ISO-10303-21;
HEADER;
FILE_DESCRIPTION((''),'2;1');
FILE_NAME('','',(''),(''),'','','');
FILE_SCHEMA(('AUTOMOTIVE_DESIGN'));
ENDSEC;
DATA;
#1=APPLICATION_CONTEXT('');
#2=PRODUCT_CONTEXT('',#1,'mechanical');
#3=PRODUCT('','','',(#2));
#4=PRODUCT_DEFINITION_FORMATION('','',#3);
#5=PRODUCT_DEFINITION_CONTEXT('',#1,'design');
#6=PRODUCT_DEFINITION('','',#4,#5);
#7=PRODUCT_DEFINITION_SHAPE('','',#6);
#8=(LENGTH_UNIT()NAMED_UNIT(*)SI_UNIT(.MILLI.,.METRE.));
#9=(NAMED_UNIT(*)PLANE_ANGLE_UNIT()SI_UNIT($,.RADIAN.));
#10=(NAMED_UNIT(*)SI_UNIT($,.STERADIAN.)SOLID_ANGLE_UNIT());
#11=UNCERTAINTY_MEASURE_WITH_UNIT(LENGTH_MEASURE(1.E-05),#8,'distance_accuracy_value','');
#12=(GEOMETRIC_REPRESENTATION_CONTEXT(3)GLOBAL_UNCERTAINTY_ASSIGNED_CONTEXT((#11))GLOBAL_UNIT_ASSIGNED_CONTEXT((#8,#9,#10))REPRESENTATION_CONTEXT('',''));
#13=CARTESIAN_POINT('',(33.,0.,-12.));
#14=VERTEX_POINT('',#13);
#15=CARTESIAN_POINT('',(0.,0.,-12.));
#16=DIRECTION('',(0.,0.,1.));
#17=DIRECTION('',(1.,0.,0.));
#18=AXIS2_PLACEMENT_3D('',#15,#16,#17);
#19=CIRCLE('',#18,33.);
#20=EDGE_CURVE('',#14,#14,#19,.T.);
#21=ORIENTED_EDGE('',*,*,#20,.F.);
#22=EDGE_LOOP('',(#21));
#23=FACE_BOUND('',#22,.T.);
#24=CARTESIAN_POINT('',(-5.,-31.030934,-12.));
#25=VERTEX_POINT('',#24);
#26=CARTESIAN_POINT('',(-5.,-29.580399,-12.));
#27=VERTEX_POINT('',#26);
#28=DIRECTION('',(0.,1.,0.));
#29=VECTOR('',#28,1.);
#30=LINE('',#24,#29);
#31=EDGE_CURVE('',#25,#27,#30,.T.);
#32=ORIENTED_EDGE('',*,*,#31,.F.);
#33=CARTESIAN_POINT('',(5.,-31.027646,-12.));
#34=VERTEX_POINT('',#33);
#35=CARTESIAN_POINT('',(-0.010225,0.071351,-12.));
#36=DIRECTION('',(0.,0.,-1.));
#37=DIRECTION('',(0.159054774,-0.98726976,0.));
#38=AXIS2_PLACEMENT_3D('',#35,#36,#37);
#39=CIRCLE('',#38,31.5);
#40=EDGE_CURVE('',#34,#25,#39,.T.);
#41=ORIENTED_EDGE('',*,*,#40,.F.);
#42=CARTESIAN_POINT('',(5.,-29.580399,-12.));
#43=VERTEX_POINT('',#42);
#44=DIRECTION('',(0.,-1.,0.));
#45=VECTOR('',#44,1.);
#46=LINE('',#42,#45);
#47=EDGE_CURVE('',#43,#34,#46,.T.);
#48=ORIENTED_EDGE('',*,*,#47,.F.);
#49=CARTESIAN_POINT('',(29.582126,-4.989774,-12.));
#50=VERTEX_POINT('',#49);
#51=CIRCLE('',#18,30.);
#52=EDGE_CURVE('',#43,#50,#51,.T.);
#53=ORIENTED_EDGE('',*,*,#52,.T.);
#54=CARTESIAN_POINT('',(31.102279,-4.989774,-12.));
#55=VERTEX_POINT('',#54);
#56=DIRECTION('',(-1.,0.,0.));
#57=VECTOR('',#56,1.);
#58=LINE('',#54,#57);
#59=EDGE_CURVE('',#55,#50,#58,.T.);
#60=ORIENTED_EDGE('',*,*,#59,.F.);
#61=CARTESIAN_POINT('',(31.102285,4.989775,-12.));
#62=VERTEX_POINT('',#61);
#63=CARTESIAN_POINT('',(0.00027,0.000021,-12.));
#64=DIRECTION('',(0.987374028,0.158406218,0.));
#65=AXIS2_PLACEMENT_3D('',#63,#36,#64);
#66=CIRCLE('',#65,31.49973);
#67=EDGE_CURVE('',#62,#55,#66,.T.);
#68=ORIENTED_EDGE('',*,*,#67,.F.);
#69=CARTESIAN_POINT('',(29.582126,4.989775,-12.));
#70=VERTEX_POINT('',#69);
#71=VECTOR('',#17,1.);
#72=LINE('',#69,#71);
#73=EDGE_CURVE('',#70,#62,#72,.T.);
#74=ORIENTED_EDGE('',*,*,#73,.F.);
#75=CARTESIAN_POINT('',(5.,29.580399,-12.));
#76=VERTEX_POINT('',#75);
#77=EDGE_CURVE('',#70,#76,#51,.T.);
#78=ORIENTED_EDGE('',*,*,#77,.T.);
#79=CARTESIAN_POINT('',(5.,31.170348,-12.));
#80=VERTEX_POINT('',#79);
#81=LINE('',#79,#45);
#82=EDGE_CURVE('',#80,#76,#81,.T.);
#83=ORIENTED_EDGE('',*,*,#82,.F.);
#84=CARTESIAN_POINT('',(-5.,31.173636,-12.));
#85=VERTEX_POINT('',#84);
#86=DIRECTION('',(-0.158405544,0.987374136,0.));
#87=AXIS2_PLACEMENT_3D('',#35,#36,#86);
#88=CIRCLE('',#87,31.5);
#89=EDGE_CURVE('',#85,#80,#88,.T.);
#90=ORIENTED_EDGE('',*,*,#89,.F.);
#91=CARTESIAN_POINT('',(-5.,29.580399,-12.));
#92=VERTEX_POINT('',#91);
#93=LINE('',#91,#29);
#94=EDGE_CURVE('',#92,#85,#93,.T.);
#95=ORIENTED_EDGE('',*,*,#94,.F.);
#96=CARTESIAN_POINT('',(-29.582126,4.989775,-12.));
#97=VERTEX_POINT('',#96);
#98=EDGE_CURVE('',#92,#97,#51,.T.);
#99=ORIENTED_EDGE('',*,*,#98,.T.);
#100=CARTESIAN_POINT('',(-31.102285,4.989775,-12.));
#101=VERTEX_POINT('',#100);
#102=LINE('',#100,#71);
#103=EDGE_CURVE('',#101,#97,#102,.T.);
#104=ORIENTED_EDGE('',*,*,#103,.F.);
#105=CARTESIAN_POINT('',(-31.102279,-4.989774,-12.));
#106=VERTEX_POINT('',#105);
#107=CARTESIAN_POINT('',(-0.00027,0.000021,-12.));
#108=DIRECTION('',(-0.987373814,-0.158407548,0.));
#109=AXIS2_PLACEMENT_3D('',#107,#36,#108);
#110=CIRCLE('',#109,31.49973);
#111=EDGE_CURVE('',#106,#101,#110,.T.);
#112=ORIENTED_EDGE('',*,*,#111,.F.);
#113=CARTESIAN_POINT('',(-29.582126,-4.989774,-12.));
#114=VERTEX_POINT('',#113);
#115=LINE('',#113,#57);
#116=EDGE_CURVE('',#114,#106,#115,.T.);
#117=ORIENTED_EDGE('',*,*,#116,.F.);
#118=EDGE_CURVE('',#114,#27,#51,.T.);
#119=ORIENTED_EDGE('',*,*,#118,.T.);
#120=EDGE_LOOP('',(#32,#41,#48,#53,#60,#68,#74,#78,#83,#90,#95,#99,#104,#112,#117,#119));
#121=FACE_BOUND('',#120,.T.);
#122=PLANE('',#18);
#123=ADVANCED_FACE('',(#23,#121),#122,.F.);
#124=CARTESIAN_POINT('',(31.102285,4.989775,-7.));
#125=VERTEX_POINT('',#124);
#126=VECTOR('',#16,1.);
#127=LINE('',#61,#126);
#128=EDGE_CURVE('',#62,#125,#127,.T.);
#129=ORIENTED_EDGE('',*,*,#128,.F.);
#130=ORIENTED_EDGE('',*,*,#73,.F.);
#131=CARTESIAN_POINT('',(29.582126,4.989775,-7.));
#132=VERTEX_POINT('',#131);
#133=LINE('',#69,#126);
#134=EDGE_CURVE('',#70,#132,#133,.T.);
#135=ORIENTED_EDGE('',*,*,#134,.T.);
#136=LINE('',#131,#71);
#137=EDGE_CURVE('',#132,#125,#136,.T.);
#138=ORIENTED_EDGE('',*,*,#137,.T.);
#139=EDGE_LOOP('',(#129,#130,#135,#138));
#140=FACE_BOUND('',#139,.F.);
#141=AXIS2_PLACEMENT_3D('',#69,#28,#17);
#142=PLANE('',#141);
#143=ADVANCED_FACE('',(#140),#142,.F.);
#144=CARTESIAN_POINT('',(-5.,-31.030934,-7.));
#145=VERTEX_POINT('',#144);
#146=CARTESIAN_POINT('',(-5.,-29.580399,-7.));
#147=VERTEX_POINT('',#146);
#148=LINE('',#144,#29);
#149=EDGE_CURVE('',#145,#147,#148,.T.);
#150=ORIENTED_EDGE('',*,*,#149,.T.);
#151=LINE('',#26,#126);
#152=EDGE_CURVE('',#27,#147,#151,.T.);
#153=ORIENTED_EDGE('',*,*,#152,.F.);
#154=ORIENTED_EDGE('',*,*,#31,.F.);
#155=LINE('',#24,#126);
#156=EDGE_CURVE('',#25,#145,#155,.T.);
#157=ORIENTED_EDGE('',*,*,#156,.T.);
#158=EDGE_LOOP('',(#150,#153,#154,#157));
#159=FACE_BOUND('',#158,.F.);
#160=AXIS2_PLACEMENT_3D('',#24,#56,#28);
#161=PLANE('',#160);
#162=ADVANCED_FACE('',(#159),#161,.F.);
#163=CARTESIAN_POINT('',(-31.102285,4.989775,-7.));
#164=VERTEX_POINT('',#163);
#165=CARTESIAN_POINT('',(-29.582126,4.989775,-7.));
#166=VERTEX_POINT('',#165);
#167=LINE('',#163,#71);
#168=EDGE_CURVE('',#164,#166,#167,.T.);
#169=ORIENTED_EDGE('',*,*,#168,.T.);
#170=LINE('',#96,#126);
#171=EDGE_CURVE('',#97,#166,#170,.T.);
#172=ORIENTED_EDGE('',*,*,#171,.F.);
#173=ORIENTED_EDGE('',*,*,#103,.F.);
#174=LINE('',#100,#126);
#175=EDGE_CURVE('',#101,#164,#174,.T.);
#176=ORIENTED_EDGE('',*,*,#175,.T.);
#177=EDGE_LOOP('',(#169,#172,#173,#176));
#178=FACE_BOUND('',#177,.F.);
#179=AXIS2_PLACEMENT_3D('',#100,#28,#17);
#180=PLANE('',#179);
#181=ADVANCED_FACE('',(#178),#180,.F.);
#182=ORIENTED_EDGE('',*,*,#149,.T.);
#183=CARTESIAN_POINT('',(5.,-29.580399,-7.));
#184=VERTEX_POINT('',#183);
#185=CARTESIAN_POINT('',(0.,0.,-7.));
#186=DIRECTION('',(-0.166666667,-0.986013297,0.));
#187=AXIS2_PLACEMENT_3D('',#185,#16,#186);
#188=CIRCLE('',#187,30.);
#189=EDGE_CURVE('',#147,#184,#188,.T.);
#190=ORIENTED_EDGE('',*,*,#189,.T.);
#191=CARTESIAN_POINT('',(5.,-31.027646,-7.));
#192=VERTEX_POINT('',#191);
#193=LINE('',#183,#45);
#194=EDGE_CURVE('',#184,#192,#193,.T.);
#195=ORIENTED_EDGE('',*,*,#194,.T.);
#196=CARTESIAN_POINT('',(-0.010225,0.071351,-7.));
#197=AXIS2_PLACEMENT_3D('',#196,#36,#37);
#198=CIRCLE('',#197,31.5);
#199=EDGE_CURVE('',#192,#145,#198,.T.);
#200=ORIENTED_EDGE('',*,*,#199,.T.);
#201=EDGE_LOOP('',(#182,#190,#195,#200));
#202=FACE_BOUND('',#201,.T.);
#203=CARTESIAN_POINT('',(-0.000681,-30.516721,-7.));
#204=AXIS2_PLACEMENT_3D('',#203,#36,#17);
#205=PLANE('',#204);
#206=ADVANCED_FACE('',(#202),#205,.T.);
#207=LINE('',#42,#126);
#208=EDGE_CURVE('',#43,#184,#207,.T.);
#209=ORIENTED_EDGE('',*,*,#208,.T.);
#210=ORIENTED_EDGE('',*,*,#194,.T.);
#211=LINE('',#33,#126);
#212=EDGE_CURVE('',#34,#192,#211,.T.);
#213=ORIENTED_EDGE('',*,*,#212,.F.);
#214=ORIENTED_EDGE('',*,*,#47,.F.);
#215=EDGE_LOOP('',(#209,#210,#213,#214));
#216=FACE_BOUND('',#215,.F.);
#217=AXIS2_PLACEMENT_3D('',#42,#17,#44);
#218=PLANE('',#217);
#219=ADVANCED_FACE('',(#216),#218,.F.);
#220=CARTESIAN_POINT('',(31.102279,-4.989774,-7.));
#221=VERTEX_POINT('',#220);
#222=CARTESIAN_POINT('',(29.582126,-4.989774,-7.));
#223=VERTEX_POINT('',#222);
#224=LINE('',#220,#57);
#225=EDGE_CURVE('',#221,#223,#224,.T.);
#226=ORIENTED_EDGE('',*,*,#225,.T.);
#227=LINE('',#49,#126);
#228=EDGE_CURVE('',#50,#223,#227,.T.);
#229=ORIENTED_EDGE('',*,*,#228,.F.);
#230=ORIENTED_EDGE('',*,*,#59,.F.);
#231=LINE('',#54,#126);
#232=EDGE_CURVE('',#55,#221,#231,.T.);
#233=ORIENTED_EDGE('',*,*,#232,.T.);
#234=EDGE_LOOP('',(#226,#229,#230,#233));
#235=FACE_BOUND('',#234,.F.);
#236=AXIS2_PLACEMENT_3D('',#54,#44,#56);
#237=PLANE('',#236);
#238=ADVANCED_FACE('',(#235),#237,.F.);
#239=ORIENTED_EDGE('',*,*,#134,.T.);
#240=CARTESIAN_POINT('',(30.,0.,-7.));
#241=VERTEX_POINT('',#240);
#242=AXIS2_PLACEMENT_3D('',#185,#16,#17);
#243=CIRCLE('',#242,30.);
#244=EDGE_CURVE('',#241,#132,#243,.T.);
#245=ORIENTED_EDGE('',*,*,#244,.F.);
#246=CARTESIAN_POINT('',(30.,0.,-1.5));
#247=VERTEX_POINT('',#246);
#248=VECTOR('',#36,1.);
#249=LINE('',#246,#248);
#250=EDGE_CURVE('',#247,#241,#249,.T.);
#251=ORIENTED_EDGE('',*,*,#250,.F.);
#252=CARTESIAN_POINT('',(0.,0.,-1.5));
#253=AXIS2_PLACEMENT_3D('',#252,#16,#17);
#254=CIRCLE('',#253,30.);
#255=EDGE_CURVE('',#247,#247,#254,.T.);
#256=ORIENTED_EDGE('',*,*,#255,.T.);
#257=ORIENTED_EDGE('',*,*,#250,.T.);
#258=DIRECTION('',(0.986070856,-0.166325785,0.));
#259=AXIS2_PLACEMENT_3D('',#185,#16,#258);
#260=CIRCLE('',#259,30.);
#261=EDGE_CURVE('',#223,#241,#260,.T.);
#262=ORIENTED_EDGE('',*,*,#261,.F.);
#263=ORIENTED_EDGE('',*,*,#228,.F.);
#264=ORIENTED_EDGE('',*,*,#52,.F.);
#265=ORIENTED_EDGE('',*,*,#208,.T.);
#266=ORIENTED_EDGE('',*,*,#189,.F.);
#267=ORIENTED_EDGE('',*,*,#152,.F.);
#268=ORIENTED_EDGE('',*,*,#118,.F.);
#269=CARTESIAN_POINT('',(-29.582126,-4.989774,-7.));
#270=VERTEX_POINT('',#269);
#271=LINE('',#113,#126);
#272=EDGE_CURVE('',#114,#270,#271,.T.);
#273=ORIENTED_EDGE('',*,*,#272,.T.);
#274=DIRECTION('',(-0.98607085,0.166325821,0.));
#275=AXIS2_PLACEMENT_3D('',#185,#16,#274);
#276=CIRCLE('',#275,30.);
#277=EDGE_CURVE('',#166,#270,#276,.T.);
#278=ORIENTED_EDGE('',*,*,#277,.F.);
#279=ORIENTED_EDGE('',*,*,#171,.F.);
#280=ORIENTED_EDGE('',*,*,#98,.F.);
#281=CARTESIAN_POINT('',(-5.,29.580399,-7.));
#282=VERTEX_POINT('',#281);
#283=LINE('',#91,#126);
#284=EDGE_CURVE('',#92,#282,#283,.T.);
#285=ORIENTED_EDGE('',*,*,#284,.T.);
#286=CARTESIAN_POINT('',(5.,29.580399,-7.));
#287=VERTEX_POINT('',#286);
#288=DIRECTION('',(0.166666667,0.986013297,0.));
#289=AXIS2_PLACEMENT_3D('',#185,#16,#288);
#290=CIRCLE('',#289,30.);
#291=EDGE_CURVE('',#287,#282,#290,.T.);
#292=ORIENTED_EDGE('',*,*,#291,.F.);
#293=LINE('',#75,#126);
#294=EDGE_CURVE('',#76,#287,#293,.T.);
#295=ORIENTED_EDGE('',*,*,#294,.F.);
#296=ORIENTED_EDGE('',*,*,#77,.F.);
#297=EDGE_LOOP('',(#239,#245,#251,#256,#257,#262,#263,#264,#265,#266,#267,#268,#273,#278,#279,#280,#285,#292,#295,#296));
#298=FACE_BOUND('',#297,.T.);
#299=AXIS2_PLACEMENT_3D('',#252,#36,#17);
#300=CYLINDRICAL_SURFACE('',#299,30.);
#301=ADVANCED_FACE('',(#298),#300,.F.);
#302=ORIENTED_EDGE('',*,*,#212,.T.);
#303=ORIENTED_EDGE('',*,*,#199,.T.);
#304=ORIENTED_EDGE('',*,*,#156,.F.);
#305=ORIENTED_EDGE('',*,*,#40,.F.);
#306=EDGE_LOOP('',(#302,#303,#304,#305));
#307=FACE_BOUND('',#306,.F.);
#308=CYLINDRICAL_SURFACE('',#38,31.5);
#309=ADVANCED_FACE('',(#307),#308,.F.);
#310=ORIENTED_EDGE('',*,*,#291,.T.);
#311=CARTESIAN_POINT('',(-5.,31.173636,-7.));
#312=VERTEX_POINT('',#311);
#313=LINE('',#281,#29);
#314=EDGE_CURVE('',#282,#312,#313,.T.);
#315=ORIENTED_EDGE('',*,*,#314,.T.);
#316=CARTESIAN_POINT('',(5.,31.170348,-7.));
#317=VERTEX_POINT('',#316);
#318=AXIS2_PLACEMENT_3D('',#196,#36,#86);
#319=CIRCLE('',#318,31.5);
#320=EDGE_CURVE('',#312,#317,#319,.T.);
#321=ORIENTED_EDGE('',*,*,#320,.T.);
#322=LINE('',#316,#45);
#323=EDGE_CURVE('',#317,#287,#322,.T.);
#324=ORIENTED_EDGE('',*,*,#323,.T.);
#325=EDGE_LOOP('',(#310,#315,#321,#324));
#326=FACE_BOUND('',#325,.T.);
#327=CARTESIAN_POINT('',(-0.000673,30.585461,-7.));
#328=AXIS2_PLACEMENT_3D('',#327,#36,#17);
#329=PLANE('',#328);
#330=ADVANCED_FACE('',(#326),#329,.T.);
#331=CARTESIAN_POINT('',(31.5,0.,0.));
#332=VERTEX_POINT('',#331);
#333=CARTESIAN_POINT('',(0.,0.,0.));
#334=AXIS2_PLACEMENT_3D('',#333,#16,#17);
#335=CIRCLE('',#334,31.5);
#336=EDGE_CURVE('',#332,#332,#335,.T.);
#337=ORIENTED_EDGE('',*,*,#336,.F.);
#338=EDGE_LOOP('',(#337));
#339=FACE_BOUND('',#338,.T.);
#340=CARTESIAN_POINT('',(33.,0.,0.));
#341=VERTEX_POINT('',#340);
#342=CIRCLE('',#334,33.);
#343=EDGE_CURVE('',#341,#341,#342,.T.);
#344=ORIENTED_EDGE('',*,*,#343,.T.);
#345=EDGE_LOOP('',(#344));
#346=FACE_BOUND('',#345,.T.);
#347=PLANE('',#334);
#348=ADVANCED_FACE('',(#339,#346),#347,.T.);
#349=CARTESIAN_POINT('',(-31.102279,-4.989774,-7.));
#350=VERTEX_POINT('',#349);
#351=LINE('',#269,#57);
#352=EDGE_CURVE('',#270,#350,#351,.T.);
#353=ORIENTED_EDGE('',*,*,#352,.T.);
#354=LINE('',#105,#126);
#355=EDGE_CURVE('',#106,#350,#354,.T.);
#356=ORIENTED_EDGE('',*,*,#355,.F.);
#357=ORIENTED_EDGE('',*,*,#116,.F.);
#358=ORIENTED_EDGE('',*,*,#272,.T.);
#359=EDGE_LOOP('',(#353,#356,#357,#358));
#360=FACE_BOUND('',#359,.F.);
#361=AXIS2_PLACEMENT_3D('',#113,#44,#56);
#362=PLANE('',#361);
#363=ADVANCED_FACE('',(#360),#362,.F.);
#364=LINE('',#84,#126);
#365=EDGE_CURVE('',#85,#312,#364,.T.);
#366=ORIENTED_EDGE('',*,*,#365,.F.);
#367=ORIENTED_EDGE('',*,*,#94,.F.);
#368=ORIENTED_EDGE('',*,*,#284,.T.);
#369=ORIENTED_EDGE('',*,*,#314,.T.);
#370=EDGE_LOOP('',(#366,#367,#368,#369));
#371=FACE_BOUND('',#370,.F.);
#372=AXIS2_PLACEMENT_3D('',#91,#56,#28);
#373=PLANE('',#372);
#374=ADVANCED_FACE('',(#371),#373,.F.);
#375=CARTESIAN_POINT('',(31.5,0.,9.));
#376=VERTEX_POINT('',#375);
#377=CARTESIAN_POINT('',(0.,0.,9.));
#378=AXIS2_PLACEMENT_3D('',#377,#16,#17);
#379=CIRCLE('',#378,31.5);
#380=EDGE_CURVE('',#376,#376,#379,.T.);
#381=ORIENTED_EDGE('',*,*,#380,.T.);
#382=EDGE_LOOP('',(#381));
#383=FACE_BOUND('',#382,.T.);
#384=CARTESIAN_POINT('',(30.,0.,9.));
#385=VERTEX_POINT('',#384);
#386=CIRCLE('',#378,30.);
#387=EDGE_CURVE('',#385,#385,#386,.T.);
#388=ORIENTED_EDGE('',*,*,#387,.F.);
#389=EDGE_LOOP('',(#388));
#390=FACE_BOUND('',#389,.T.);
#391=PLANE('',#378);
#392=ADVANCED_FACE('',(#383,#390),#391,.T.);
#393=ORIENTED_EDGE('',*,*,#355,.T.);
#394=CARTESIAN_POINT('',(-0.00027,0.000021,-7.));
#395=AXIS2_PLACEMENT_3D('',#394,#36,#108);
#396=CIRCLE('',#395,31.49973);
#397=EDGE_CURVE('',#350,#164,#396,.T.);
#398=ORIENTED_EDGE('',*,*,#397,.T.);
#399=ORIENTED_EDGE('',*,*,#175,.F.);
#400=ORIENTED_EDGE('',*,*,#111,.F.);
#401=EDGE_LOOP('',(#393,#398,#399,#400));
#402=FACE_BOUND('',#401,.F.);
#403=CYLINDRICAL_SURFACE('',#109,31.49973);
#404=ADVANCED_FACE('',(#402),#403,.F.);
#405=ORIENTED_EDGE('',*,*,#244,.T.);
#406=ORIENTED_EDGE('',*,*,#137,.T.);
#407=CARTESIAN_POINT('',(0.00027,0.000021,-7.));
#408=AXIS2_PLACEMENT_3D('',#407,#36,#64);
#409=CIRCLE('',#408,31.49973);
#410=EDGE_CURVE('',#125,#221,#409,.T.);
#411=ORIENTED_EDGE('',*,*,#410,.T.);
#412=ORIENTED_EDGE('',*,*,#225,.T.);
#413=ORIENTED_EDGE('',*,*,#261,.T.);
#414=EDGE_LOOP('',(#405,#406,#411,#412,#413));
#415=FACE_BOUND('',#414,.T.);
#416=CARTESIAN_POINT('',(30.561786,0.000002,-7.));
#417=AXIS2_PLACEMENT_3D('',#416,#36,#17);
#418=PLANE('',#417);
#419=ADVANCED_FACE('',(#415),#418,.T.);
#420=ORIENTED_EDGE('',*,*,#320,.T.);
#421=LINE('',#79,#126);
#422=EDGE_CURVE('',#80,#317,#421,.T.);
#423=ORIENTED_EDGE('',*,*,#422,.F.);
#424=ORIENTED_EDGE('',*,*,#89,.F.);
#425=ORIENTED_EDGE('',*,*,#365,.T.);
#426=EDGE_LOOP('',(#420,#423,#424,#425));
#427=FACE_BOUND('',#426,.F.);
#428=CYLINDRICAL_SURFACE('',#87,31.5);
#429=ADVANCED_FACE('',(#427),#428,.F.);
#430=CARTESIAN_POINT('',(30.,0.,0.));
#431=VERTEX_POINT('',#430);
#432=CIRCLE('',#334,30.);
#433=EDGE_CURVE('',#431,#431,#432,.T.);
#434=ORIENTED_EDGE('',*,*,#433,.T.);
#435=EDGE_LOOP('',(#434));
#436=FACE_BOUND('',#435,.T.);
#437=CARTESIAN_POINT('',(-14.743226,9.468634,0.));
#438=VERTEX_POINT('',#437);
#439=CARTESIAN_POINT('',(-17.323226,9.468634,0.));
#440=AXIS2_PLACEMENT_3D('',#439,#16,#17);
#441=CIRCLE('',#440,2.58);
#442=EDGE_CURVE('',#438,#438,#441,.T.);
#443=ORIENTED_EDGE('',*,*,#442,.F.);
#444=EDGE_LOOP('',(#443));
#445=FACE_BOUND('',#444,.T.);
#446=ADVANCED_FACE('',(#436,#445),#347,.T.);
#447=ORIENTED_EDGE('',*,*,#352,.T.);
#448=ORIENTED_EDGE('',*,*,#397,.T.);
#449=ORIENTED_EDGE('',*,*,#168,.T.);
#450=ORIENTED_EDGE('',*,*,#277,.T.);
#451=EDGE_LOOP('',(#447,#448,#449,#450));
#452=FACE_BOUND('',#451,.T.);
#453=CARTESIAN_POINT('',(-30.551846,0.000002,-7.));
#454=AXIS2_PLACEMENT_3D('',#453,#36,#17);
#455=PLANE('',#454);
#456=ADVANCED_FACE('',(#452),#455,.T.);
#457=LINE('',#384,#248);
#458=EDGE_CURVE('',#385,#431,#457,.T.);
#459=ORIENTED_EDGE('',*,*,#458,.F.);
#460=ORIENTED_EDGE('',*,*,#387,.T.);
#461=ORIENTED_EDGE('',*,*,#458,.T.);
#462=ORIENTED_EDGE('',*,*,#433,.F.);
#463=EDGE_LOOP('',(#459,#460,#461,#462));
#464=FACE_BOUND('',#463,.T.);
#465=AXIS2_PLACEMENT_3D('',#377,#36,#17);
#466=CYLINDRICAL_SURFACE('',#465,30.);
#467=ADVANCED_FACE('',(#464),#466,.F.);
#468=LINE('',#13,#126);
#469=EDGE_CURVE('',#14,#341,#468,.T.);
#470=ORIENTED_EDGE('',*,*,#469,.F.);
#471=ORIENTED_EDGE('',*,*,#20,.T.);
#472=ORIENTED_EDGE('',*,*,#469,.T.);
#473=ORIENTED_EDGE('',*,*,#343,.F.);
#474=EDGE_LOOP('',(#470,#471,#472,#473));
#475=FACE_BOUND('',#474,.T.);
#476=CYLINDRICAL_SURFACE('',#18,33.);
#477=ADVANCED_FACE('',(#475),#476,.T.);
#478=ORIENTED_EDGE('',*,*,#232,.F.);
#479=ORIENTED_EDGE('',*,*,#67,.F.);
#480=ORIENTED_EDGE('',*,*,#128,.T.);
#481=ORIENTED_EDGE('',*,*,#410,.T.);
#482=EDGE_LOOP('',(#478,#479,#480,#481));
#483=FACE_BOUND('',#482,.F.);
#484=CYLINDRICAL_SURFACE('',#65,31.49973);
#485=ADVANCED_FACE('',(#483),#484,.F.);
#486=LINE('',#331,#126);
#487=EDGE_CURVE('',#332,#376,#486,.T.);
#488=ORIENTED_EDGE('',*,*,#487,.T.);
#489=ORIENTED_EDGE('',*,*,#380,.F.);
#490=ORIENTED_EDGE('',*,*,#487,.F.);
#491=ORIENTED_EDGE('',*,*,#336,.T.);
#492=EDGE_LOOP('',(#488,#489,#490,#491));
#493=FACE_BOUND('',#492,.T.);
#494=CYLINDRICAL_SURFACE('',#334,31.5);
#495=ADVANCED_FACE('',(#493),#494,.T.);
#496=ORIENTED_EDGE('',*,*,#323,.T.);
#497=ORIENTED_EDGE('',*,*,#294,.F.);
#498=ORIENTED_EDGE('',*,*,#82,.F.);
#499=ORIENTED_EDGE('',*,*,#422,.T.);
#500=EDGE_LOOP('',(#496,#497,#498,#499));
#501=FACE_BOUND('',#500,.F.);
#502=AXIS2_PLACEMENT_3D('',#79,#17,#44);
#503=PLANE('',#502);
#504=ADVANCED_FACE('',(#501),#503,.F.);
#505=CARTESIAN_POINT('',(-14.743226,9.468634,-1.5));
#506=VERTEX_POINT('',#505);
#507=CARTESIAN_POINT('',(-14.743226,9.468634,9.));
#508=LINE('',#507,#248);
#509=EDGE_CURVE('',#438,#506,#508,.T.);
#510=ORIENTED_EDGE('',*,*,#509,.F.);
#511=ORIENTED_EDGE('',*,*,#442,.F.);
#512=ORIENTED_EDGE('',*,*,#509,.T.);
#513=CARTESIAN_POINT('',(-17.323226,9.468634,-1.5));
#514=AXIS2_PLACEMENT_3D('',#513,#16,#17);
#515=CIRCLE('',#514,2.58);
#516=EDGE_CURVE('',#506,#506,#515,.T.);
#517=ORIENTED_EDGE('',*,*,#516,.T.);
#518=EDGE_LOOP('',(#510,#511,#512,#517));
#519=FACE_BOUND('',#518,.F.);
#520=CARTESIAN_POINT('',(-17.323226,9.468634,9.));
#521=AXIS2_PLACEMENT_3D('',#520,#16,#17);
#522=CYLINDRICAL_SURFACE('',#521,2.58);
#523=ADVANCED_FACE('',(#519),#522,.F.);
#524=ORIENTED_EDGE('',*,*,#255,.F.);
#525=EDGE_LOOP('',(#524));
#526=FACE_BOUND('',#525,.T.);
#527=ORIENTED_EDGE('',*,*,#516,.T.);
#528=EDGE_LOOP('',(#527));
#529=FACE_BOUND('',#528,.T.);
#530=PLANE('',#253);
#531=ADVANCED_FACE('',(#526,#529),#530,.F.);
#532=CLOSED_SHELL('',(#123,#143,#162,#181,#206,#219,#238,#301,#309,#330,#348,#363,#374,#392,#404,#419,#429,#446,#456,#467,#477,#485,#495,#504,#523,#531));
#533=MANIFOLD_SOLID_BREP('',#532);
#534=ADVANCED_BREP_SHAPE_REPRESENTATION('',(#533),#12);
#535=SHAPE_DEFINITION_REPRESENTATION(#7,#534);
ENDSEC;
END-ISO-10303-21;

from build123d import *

# Parameters (mm, degrees)
F3_DEPTH = 5
F4_R     = 2.58
F5_DEPTH = 25


# Not quite as in the source:
# - ends of sketch curves that miss each other by under 0.0002 mm in the source are joined


with BuildPart() as f1:
    # F0 (on Front) → F1 (revolve)
    with BuildSketch(Plane.XZ):
        Polygon((30, 0), (0, 0), (0, -1.5), (30, -1.5), (30, -12), (33, -12), (33, 0), (31.5, 0), (31.5, 9), (30, 9), align=None)
    revolve(axis=Axis((0, 0, -0.75), (0, 0, 1)))

    # F2 (on face) → F3 (cut)
    with BuildSketch(Plane(origin=(0, 0, -12), x_dir=(1, 0, 0), z_dir=(0, 0, -1))):
        with BuildLine():
            Line((-5, 31.030934304), (-5, 29.5803989155))
            ThreePointArc((-5, 29.5803989155), (0, 30), (5, 29.5803989155))
            Line((5, 29.5803989155), (5, 31.0276464719))
            ThreePointArc((5, 31.0276464719), (0.0001313019, 31.4286473296), (-5, 31.030934304))
        make_face()
        with BuildLine():
            Line((-29.5821256825, 4.9897735526), (-31.1022785476, 4.9897735526))
            ThreePointArc((-31.1022785476, 4.9897735526), (-31.5, 0), (-31.1022852718, -4.9897746313))
            Line((-31.1022852718, -4.9897746313), (-29.5821255005, -4.9897746313))
            ThreePointArc((-29.5821255005, -4.9897746313), (-30, -5.47e-07), (-29.5821256825, 4.9897735526))
        make_face()
        with BuildLine():
            ThreePointArc((5, -29.5803989155), (0, -30), (-5, -29.5803989155))
            Line((-5, -29.5803989155), (-5, -31.1736362396))
            ThreePointArc((-5, -31.1736362396), (0.0001313019, -31.5713492653), (5, -31.1703484075))
            Line((5, -31.1703484075), (5, -29.5803989155))
        make_face()
        with BuildLine():
            Line((31.1022785476, 4.9897735526), (29.5821256825, 4.9897735526))
            ThreePointArc((29.5821256825, 4.9897735526), (29.8953488897, 2.5036203312), (30, 0))
            ThreePointArc((30, 0), (29.8953488441, -2.5036208763), (29.5821255005, -4.9897746313))
            Line((29.5821255005, -4.9897746313), (31.1022852718, -4.9897746313))
            ThreePointArc((31.1022852718, -4.9897746313), (31.5, 0), (31.1022785476, 4.9897735526))
        make_face()
    extrude(amount=-F3_DEPTH, mode=Mode.SUBTRACT)

    # F4 (on face) → F5 (cut)
    with BuildSketch(Plane.XY.offset(9)):
        with Locations((-17.3232257366, 9.4686336815)):
            Circle(F4_R)
    extrude(amount=-F5_DEPTH, mode=Mode.SUBTRACT)


solid = f1.part
